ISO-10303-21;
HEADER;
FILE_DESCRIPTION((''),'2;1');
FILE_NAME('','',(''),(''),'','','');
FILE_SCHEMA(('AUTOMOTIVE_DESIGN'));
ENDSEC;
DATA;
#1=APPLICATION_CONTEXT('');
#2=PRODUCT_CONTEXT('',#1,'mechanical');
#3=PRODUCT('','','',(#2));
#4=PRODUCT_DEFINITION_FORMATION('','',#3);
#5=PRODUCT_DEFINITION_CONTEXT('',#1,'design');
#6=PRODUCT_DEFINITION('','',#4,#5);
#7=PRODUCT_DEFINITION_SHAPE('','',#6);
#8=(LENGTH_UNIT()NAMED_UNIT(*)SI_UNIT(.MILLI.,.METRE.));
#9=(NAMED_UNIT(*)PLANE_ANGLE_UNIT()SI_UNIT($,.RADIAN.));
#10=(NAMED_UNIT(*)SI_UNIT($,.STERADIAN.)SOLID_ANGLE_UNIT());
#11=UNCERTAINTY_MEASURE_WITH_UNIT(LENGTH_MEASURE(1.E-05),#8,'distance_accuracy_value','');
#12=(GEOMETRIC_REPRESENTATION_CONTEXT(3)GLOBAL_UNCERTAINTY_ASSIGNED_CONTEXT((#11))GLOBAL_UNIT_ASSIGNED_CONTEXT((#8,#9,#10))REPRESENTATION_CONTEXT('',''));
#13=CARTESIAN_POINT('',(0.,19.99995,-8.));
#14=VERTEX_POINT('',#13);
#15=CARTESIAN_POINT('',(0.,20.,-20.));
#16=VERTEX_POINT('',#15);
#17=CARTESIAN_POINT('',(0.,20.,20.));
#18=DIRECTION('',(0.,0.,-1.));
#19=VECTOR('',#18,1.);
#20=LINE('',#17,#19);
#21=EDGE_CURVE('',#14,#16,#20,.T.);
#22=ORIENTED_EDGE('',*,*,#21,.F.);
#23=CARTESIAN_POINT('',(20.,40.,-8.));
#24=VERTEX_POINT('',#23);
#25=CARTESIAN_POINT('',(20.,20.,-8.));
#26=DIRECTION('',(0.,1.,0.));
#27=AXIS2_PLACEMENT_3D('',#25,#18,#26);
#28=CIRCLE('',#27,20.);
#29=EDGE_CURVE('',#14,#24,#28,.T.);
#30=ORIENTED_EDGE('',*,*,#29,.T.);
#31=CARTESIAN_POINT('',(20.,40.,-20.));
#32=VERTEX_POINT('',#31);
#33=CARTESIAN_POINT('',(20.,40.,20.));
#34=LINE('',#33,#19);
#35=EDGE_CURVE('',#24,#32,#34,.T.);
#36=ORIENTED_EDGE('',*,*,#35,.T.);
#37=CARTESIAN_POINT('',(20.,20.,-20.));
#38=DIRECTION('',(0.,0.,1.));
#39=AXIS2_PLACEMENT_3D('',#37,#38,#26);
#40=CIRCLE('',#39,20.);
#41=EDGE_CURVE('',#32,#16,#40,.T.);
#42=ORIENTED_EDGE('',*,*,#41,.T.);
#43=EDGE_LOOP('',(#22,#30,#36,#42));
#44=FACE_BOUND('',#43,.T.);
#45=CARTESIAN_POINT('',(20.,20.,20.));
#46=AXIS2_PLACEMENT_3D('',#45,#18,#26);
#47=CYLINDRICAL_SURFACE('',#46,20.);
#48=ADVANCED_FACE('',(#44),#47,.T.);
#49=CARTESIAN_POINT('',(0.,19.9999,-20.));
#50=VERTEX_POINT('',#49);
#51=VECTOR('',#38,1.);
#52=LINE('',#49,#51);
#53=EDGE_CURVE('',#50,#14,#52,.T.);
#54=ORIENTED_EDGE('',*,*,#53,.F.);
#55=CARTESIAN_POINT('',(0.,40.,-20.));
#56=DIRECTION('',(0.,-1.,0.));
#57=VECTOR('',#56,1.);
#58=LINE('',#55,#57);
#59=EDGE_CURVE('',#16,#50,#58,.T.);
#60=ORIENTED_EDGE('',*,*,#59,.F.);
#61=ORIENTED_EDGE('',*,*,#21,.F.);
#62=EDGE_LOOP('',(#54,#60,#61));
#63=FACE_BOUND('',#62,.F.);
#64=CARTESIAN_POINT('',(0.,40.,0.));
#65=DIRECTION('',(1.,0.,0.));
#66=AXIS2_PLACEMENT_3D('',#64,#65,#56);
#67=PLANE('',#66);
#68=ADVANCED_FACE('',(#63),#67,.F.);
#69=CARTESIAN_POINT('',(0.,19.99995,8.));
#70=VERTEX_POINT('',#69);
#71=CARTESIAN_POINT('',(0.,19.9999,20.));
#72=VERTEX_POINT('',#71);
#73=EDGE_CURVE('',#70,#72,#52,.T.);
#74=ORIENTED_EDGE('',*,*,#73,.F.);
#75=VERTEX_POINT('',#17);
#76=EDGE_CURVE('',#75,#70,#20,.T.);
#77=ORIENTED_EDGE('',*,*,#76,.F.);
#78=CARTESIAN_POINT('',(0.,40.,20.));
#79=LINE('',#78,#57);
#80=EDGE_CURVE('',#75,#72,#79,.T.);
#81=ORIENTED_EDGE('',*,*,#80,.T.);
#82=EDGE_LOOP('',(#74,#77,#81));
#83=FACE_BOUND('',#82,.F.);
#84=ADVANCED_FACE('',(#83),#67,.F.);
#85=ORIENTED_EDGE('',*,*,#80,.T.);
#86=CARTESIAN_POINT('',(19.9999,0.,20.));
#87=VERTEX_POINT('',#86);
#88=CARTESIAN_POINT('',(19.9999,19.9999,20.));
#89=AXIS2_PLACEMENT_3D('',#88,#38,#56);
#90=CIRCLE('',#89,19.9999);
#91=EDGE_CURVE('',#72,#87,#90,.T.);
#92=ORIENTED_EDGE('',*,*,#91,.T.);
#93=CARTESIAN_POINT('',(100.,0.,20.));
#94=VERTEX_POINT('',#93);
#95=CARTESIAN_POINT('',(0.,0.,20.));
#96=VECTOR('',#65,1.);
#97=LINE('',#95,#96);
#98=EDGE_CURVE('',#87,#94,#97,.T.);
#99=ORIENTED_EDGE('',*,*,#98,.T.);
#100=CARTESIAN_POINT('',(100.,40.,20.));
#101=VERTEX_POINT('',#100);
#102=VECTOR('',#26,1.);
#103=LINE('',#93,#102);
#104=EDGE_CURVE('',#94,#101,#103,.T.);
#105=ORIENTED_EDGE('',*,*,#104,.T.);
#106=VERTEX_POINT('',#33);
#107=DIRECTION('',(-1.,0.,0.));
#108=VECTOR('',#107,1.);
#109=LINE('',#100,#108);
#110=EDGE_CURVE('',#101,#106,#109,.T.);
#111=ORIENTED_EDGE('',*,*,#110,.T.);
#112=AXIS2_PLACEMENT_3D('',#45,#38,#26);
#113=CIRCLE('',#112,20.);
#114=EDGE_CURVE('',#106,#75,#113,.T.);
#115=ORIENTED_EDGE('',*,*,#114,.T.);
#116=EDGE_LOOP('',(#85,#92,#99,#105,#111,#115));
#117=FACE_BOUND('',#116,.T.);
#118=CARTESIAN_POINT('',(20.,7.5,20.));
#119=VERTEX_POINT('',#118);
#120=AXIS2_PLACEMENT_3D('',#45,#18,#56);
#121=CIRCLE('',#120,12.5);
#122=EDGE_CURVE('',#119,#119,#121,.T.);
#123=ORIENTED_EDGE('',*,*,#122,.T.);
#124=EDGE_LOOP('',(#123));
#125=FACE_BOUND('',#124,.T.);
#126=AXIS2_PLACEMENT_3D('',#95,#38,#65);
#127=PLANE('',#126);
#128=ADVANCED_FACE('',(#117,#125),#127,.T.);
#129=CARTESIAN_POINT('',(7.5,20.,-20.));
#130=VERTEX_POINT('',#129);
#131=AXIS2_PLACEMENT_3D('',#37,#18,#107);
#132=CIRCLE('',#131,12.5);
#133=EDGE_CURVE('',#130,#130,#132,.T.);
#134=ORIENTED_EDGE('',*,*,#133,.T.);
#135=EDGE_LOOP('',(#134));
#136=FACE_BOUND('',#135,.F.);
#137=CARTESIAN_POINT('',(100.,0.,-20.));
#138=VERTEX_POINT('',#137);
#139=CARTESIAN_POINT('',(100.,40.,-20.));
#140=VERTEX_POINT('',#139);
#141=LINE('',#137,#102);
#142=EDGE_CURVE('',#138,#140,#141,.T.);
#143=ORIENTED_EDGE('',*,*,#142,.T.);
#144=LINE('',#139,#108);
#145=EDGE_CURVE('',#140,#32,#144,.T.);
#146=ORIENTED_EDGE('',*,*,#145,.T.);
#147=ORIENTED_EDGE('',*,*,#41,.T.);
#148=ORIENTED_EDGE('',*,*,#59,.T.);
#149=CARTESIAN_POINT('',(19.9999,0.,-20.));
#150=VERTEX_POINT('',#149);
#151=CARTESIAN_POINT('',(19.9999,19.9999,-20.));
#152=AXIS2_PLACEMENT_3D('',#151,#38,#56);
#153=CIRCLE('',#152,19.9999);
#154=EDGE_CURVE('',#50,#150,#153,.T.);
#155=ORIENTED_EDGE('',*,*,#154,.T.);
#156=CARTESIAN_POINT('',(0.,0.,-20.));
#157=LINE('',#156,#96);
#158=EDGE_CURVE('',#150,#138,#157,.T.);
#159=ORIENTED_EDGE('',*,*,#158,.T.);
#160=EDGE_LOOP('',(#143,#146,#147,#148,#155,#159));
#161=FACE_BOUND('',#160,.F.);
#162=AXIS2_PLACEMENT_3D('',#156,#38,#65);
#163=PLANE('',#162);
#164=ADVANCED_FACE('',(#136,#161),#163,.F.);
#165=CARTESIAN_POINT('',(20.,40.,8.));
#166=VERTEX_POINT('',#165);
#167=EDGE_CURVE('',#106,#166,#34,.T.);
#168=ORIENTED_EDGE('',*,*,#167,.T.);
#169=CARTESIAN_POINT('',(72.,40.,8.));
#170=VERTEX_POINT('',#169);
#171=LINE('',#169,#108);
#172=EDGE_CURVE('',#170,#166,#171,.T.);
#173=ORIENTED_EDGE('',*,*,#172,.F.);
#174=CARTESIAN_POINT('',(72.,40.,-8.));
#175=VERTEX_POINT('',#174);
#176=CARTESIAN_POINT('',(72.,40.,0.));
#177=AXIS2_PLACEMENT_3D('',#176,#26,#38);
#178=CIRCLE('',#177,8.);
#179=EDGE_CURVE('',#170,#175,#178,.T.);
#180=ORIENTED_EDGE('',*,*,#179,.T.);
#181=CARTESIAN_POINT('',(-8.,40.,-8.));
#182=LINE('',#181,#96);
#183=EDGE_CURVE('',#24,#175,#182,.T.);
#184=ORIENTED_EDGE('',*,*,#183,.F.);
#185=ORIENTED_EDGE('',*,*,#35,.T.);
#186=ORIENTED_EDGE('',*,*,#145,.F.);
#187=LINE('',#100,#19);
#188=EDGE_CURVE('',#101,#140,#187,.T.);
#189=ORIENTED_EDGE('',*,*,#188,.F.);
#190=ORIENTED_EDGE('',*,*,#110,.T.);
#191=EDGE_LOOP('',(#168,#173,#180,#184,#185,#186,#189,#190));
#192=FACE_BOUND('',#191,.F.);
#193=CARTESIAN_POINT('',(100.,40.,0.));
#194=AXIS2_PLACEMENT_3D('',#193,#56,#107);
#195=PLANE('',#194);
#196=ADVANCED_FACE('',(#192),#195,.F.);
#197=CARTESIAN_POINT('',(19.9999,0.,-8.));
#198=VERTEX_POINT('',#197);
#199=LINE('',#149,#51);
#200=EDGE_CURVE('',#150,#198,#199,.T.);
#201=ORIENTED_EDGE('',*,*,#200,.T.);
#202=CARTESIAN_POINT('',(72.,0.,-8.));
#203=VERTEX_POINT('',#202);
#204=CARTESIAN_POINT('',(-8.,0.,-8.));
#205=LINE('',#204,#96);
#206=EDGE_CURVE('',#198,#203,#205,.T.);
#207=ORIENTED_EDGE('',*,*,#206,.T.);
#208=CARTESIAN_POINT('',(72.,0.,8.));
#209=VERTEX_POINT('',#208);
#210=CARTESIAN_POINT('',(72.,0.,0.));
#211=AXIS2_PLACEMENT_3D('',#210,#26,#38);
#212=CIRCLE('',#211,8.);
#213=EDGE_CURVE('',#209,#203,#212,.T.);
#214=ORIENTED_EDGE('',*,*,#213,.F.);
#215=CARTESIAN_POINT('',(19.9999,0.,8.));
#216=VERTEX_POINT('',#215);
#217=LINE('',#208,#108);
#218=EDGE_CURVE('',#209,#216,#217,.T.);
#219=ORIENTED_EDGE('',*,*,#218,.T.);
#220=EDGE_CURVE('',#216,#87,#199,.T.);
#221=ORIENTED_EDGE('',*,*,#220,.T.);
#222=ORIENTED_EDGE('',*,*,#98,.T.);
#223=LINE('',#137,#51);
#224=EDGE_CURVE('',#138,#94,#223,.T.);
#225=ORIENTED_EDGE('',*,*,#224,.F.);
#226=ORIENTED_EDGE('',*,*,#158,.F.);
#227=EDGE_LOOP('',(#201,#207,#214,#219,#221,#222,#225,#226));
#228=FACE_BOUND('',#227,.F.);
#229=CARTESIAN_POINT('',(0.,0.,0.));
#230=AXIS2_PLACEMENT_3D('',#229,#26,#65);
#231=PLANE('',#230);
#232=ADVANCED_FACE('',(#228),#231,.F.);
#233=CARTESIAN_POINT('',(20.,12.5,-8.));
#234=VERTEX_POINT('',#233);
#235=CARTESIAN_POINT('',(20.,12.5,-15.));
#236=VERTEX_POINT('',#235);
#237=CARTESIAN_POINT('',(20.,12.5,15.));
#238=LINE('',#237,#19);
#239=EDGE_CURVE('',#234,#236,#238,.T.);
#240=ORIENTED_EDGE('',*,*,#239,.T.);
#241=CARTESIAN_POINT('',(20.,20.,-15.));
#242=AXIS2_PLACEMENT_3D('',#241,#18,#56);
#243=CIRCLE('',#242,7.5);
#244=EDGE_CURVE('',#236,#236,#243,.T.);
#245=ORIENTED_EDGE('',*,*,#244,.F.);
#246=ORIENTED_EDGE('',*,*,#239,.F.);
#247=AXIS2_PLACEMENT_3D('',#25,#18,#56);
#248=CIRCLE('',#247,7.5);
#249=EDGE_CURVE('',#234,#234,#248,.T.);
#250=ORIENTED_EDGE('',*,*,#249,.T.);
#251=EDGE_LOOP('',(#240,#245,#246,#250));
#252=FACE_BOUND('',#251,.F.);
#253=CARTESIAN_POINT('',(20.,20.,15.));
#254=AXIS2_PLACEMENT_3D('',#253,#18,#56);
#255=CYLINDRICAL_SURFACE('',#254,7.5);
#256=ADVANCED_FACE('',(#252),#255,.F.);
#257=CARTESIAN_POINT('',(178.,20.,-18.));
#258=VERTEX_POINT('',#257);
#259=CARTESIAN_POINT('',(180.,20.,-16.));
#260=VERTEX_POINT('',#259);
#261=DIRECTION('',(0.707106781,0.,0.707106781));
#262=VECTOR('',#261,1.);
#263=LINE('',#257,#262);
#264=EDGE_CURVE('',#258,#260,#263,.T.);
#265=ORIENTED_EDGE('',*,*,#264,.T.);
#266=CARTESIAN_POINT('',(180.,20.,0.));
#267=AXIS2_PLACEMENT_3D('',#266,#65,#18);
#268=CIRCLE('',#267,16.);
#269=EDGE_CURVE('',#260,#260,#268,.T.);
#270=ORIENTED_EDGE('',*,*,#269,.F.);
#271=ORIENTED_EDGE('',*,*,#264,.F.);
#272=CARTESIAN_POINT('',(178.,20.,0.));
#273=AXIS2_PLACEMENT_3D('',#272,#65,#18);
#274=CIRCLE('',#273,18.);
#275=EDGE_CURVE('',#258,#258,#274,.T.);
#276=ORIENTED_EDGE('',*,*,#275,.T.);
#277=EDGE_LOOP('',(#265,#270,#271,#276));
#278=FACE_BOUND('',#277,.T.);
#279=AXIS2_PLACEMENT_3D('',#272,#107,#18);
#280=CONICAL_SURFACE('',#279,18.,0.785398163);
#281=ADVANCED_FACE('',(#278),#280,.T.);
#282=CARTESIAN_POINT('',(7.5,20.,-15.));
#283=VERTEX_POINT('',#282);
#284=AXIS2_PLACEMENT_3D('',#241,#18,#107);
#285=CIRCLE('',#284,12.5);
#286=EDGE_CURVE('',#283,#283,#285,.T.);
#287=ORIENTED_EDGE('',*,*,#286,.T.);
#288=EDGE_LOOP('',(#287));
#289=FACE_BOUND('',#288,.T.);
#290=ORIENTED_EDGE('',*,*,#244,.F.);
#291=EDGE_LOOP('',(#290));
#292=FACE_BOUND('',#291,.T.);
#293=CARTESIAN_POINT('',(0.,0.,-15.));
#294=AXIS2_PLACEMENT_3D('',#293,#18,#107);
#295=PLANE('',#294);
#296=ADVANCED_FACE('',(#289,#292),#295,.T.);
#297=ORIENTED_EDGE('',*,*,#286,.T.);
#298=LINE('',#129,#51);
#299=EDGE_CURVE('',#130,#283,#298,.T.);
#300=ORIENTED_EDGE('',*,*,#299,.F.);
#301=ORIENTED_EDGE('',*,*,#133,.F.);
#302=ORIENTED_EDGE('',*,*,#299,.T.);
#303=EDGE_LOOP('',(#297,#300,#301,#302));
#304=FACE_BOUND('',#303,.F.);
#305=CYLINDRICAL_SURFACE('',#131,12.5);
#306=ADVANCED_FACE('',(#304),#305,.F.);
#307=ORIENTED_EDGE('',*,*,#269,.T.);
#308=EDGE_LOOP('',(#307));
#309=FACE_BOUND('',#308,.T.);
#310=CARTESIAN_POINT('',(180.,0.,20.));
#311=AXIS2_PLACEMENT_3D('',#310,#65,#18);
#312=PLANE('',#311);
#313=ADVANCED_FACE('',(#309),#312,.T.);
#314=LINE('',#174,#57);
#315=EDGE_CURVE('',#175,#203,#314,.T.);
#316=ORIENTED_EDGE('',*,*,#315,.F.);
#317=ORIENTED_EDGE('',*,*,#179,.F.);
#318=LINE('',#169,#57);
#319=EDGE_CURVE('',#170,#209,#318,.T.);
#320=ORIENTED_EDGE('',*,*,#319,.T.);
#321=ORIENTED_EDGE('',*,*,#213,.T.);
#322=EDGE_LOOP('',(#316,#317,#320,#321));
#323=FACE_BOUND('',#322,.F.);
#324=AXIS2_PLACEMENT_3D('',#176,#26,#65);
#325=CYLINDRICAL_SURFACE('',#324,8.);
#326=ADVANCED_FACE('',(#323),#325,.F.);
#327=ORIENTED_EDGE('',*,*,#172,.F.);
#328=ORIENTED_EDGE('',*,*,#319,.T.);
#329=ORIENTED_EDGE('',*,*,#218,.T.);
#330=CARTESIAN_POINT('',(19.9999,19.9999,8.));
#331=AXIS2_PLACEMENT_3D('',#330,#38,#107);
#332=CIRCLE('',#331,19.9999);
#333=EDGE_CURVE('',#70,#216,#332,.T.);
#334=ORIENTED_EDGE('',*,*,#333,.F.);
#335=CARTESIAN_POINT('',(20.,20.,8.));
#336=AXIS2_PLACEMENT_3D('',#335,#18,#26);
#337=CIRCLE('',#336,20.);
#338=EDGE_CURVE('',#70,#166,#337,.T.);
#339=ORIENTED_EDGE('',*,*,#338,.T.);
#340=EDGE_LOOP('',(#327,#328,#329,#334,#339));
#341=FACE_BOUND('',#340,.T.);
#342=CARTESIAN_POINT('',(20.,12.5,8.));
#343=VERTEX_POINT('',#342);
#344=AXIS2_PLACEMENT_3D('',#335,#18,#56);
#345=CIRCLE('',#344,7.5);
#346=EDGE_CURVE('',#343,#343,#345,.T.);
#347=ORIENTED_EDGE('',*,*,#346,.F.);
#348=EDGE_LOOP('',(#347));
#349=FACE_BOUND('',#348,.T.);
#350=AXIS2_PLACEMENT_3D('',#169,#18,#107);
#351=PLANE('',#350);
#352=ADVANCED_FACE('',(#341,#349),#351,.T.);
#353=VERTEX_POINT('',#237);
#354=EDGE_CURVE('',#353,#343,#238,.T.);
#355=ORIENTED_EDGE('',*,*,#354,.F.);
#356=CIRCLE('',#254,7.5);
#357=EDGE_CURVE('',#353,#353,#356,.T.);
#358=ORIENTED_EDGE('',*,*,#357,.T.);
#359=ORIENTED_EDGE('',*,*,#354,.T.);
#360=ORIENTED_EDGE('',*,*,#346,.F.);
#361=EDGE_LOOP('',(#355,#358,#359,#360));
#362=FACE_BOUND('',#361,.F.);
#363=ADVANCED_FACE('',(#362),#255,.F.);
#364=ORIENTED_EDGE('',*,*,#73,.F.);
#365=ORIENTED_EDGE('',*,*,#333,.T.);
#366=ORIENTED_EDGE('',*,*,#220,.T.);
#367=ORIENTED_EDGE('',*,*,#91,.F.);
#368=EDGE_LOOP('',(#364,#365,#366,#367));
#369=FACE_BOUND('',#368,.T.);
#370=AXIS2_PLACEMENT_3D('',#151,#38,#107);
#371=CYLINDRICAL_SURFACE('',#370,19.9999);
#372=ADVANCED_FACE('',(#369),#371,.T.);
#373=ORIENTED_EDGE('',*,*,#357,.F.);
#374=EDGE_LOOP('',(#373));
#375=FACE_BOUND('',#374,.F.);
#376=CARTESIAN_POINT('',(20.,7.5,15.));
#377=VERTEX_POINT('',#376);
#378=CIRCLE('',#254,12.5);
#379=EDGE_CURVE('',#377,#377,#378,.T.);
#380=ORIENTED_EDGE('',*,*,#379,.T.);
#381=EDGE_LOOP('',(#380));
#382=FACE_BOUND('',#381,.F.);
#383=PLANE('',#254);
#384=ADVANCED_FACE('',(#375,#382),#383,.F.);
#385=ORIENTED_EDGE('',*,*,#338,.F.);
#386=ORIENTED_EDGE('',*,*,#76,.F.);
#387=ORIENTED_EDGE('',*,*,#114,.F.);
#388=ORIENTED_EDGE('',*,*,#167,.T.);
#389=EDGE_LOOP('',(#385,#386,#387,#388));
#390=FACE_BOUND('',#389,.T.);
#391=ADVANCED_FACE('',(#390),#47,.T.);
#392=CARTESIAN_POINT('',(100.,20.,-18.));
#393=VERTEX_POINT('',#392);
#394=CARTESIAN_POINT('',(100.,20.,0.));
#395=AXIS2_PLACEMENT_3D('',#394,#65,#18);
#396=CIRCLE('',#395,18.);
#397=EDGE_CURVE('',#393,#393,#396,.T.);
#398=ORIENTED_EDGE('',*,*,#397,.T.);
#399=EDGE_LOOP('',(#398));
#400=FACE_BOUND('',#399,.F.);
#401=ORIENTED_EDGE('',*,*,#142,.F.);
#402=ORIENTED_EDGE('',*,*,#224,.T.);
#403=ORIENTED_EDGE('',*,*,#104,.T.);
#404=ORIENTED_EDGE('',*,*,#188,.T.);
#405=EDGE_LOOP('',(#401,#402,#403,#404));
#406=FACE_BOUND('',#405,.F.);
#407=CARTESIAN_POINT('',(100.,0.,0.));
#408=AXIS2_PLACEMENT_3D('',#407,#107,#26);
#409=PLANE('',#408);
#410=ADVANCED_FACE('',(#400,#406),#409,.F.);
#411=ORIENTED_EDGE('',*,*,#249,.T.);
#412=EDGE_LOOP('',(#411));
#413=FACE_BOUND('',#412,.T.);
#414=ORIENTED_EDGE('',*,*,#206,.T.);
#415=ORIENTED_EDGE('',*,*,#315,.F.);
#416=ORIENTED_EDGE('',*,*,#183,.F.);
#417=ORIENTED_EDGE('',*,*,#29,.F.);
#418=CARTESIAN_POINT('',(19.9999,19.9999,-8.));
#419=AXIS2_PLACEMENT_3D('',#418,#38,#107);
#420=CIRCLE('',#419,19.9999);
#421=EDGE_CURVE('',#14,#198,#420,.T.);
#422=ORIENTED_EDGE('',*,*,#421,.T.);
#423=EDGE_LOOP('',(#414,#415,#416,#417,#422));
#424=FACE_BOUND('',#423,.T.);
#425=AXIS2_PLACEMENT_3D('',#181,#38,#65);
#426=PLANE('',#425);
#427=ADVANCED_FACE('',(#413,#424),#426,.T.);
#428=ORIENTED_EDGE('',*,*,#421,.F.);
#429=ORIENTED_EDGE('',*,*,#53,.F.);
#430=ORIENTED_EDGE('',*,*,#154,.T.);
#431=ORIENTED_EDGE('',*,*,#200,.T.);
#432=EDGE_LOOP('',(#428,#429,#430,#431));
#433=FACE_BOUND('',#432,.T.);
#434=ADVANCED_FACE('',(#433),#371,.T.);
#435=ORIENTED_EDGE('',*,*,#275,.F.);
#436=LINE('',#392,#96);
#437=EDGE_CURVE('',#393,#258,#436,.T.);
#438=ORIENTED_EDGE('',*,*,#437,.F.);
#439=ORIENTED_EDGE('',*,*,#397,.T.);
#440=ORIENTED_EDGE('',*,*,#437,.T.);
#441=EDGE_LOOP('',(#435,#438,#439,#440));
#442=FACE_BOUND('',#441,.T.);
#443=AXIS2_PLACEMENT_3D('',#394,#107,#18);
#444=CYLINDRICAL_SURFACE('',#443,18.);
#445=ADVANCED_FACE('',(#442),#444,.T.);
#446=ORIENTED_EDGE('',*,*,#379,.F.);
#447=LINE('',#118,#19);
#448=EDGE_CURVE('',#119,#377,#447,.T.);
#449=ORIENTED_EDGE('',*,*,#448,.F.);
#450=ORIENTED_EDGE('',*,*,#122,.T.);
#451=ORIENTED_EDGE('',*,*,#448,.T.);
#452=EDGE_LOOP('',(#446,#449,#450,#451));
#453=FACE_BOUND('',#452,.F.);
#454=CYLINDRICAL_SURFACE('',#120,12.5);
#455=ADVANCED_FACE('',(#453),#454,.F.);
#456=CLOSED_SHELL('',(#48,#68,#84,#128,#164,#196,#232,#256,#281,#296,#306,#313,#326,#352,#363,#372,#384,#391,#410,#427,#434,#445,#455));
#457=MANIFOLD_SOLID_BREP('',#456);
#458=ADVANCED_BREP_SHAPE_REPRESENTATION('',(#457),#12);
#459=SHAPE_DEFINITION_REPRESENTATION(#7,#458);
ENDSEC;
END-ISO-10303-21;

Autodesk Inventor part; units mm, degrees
ref_plane "YZ Plane" through (0, 0, 0) normal (1, 0, 0) x (0, 1, 0)
ref_plane "XZ Plane" through (0, 0, 0) normal (0, 1, 0) x (-1, 0, 0)
ref_plane "XY Plane" through (0, 0, 0) normal (0, 0, 1) x (1, 0, 0)
sketch "Sketch1" plane through (0, 0, 0) normal (0, 0, 1) x (1, 0, 0)
  line L0 (0, 0) -> (100, 0)
  line L1 (100, 0) -> (100, 40)
  line L2 (100, 40) -> (0, 40)
  line L3 (0, 40) -> (0, 0)
  dimension "d0" = 100
  dimension "d1" = 40
extrude "Extrusion1" add sketch "Sketch1" along normal mid plane 40
sketch "Sketch2" plane through (100, 0, 20) normal (1, 0, 0) x (0, 0, -1)
  line L0 (40, 40) -> (0, 40) projected
  circle A0 centre (20, 20) radius 18
  point P0 (20, 0)
  dimension "d5" = 36
extrude "Extrusion2" add sketch "Sketch2" along normal blind 80
thread "Thread1" size "M36x4" class "6g" standard "ANSI Metric M Profile" length 80 offset 33
chamfer "Chamfer1" distance 2 angle 45 1 edges at (180, 20, 18)
sketch "Sketch3" plane through (0, 0, 20) normal (0, 0, 1) x (1, 0, 0)
  line L0 (0, 0) -> (100, 0) projected
  line L1 (100, 40) -> (0, 40) projected
  circle A0 centre (20, 20) radius 7.5
  circle A1 centre (20, 20) radius 12.5
  line L2 (100, 0) -> (100, 40) projected
  dimension "d13" = 80
  dimension "d14" = 15
  dimension "d15" = 25
hole "Hole1" at (20, 20, 20) direction (0, 0, -1) diameter 15 end through all counterbore diameter 25 counterbore depth 5
fillet "Fillet1" radius 20 1 edges at (0, 40, 0)
fillet "Fillet2" radius 20 1 edges at (0, 0, 0)
sketch "Sketch9" plane through (100, 40, 20) normal (0, 1, 0) x (1, 0, 0)
  line L0 (0, 0) -> (-80, 0) projected
  line L1 (-28, 0) -> (-28, 39.5262)
  line L2 (0, 40) -> (0, 0) projected
  line L3 (-108, 28) -> (-28, 28)
  line L4 (-28, 28) -> (-28, 12)
  line L5 (-28, 12) -> (-108, 12)
  line L6 (-108, 12) -> (-108, 28)
  line L7 (-80, 40) -> (0, 40) projected
  circle A0 centre (-28, 20) radius 8
  point P0 (-100, 20)
  point P1 (-68, 12)
  point P2 (-28, 12)
  point P3 (-28, 28)
  dimension "d37" = 28
  dimension "d38" = 0
  dimension "d39" = 12
  dimension "d40" = 16
  dimension "d41" = 16
  dimension "d42" = 80
  dimension "d43" = 16
extrude "Extrusion5" cut sketch "Sketch9" against normal blind 40
sketch "Sketch12" plane through (0, 0, -20) normal (0, 0, -1) x (-1, 0, 0)
  line L0 (-20, 0) -> (-100, 0) projected
  circle A0 centre (-20, 20) radius 12.5 projected
  circle A1 centre (-20, 20) radius 12.5
  point P0 (0, 0)
extrude "Extrusion6" cut sketch "Sketch12" against normal blind 5
properties part number "Partultimaparte"
